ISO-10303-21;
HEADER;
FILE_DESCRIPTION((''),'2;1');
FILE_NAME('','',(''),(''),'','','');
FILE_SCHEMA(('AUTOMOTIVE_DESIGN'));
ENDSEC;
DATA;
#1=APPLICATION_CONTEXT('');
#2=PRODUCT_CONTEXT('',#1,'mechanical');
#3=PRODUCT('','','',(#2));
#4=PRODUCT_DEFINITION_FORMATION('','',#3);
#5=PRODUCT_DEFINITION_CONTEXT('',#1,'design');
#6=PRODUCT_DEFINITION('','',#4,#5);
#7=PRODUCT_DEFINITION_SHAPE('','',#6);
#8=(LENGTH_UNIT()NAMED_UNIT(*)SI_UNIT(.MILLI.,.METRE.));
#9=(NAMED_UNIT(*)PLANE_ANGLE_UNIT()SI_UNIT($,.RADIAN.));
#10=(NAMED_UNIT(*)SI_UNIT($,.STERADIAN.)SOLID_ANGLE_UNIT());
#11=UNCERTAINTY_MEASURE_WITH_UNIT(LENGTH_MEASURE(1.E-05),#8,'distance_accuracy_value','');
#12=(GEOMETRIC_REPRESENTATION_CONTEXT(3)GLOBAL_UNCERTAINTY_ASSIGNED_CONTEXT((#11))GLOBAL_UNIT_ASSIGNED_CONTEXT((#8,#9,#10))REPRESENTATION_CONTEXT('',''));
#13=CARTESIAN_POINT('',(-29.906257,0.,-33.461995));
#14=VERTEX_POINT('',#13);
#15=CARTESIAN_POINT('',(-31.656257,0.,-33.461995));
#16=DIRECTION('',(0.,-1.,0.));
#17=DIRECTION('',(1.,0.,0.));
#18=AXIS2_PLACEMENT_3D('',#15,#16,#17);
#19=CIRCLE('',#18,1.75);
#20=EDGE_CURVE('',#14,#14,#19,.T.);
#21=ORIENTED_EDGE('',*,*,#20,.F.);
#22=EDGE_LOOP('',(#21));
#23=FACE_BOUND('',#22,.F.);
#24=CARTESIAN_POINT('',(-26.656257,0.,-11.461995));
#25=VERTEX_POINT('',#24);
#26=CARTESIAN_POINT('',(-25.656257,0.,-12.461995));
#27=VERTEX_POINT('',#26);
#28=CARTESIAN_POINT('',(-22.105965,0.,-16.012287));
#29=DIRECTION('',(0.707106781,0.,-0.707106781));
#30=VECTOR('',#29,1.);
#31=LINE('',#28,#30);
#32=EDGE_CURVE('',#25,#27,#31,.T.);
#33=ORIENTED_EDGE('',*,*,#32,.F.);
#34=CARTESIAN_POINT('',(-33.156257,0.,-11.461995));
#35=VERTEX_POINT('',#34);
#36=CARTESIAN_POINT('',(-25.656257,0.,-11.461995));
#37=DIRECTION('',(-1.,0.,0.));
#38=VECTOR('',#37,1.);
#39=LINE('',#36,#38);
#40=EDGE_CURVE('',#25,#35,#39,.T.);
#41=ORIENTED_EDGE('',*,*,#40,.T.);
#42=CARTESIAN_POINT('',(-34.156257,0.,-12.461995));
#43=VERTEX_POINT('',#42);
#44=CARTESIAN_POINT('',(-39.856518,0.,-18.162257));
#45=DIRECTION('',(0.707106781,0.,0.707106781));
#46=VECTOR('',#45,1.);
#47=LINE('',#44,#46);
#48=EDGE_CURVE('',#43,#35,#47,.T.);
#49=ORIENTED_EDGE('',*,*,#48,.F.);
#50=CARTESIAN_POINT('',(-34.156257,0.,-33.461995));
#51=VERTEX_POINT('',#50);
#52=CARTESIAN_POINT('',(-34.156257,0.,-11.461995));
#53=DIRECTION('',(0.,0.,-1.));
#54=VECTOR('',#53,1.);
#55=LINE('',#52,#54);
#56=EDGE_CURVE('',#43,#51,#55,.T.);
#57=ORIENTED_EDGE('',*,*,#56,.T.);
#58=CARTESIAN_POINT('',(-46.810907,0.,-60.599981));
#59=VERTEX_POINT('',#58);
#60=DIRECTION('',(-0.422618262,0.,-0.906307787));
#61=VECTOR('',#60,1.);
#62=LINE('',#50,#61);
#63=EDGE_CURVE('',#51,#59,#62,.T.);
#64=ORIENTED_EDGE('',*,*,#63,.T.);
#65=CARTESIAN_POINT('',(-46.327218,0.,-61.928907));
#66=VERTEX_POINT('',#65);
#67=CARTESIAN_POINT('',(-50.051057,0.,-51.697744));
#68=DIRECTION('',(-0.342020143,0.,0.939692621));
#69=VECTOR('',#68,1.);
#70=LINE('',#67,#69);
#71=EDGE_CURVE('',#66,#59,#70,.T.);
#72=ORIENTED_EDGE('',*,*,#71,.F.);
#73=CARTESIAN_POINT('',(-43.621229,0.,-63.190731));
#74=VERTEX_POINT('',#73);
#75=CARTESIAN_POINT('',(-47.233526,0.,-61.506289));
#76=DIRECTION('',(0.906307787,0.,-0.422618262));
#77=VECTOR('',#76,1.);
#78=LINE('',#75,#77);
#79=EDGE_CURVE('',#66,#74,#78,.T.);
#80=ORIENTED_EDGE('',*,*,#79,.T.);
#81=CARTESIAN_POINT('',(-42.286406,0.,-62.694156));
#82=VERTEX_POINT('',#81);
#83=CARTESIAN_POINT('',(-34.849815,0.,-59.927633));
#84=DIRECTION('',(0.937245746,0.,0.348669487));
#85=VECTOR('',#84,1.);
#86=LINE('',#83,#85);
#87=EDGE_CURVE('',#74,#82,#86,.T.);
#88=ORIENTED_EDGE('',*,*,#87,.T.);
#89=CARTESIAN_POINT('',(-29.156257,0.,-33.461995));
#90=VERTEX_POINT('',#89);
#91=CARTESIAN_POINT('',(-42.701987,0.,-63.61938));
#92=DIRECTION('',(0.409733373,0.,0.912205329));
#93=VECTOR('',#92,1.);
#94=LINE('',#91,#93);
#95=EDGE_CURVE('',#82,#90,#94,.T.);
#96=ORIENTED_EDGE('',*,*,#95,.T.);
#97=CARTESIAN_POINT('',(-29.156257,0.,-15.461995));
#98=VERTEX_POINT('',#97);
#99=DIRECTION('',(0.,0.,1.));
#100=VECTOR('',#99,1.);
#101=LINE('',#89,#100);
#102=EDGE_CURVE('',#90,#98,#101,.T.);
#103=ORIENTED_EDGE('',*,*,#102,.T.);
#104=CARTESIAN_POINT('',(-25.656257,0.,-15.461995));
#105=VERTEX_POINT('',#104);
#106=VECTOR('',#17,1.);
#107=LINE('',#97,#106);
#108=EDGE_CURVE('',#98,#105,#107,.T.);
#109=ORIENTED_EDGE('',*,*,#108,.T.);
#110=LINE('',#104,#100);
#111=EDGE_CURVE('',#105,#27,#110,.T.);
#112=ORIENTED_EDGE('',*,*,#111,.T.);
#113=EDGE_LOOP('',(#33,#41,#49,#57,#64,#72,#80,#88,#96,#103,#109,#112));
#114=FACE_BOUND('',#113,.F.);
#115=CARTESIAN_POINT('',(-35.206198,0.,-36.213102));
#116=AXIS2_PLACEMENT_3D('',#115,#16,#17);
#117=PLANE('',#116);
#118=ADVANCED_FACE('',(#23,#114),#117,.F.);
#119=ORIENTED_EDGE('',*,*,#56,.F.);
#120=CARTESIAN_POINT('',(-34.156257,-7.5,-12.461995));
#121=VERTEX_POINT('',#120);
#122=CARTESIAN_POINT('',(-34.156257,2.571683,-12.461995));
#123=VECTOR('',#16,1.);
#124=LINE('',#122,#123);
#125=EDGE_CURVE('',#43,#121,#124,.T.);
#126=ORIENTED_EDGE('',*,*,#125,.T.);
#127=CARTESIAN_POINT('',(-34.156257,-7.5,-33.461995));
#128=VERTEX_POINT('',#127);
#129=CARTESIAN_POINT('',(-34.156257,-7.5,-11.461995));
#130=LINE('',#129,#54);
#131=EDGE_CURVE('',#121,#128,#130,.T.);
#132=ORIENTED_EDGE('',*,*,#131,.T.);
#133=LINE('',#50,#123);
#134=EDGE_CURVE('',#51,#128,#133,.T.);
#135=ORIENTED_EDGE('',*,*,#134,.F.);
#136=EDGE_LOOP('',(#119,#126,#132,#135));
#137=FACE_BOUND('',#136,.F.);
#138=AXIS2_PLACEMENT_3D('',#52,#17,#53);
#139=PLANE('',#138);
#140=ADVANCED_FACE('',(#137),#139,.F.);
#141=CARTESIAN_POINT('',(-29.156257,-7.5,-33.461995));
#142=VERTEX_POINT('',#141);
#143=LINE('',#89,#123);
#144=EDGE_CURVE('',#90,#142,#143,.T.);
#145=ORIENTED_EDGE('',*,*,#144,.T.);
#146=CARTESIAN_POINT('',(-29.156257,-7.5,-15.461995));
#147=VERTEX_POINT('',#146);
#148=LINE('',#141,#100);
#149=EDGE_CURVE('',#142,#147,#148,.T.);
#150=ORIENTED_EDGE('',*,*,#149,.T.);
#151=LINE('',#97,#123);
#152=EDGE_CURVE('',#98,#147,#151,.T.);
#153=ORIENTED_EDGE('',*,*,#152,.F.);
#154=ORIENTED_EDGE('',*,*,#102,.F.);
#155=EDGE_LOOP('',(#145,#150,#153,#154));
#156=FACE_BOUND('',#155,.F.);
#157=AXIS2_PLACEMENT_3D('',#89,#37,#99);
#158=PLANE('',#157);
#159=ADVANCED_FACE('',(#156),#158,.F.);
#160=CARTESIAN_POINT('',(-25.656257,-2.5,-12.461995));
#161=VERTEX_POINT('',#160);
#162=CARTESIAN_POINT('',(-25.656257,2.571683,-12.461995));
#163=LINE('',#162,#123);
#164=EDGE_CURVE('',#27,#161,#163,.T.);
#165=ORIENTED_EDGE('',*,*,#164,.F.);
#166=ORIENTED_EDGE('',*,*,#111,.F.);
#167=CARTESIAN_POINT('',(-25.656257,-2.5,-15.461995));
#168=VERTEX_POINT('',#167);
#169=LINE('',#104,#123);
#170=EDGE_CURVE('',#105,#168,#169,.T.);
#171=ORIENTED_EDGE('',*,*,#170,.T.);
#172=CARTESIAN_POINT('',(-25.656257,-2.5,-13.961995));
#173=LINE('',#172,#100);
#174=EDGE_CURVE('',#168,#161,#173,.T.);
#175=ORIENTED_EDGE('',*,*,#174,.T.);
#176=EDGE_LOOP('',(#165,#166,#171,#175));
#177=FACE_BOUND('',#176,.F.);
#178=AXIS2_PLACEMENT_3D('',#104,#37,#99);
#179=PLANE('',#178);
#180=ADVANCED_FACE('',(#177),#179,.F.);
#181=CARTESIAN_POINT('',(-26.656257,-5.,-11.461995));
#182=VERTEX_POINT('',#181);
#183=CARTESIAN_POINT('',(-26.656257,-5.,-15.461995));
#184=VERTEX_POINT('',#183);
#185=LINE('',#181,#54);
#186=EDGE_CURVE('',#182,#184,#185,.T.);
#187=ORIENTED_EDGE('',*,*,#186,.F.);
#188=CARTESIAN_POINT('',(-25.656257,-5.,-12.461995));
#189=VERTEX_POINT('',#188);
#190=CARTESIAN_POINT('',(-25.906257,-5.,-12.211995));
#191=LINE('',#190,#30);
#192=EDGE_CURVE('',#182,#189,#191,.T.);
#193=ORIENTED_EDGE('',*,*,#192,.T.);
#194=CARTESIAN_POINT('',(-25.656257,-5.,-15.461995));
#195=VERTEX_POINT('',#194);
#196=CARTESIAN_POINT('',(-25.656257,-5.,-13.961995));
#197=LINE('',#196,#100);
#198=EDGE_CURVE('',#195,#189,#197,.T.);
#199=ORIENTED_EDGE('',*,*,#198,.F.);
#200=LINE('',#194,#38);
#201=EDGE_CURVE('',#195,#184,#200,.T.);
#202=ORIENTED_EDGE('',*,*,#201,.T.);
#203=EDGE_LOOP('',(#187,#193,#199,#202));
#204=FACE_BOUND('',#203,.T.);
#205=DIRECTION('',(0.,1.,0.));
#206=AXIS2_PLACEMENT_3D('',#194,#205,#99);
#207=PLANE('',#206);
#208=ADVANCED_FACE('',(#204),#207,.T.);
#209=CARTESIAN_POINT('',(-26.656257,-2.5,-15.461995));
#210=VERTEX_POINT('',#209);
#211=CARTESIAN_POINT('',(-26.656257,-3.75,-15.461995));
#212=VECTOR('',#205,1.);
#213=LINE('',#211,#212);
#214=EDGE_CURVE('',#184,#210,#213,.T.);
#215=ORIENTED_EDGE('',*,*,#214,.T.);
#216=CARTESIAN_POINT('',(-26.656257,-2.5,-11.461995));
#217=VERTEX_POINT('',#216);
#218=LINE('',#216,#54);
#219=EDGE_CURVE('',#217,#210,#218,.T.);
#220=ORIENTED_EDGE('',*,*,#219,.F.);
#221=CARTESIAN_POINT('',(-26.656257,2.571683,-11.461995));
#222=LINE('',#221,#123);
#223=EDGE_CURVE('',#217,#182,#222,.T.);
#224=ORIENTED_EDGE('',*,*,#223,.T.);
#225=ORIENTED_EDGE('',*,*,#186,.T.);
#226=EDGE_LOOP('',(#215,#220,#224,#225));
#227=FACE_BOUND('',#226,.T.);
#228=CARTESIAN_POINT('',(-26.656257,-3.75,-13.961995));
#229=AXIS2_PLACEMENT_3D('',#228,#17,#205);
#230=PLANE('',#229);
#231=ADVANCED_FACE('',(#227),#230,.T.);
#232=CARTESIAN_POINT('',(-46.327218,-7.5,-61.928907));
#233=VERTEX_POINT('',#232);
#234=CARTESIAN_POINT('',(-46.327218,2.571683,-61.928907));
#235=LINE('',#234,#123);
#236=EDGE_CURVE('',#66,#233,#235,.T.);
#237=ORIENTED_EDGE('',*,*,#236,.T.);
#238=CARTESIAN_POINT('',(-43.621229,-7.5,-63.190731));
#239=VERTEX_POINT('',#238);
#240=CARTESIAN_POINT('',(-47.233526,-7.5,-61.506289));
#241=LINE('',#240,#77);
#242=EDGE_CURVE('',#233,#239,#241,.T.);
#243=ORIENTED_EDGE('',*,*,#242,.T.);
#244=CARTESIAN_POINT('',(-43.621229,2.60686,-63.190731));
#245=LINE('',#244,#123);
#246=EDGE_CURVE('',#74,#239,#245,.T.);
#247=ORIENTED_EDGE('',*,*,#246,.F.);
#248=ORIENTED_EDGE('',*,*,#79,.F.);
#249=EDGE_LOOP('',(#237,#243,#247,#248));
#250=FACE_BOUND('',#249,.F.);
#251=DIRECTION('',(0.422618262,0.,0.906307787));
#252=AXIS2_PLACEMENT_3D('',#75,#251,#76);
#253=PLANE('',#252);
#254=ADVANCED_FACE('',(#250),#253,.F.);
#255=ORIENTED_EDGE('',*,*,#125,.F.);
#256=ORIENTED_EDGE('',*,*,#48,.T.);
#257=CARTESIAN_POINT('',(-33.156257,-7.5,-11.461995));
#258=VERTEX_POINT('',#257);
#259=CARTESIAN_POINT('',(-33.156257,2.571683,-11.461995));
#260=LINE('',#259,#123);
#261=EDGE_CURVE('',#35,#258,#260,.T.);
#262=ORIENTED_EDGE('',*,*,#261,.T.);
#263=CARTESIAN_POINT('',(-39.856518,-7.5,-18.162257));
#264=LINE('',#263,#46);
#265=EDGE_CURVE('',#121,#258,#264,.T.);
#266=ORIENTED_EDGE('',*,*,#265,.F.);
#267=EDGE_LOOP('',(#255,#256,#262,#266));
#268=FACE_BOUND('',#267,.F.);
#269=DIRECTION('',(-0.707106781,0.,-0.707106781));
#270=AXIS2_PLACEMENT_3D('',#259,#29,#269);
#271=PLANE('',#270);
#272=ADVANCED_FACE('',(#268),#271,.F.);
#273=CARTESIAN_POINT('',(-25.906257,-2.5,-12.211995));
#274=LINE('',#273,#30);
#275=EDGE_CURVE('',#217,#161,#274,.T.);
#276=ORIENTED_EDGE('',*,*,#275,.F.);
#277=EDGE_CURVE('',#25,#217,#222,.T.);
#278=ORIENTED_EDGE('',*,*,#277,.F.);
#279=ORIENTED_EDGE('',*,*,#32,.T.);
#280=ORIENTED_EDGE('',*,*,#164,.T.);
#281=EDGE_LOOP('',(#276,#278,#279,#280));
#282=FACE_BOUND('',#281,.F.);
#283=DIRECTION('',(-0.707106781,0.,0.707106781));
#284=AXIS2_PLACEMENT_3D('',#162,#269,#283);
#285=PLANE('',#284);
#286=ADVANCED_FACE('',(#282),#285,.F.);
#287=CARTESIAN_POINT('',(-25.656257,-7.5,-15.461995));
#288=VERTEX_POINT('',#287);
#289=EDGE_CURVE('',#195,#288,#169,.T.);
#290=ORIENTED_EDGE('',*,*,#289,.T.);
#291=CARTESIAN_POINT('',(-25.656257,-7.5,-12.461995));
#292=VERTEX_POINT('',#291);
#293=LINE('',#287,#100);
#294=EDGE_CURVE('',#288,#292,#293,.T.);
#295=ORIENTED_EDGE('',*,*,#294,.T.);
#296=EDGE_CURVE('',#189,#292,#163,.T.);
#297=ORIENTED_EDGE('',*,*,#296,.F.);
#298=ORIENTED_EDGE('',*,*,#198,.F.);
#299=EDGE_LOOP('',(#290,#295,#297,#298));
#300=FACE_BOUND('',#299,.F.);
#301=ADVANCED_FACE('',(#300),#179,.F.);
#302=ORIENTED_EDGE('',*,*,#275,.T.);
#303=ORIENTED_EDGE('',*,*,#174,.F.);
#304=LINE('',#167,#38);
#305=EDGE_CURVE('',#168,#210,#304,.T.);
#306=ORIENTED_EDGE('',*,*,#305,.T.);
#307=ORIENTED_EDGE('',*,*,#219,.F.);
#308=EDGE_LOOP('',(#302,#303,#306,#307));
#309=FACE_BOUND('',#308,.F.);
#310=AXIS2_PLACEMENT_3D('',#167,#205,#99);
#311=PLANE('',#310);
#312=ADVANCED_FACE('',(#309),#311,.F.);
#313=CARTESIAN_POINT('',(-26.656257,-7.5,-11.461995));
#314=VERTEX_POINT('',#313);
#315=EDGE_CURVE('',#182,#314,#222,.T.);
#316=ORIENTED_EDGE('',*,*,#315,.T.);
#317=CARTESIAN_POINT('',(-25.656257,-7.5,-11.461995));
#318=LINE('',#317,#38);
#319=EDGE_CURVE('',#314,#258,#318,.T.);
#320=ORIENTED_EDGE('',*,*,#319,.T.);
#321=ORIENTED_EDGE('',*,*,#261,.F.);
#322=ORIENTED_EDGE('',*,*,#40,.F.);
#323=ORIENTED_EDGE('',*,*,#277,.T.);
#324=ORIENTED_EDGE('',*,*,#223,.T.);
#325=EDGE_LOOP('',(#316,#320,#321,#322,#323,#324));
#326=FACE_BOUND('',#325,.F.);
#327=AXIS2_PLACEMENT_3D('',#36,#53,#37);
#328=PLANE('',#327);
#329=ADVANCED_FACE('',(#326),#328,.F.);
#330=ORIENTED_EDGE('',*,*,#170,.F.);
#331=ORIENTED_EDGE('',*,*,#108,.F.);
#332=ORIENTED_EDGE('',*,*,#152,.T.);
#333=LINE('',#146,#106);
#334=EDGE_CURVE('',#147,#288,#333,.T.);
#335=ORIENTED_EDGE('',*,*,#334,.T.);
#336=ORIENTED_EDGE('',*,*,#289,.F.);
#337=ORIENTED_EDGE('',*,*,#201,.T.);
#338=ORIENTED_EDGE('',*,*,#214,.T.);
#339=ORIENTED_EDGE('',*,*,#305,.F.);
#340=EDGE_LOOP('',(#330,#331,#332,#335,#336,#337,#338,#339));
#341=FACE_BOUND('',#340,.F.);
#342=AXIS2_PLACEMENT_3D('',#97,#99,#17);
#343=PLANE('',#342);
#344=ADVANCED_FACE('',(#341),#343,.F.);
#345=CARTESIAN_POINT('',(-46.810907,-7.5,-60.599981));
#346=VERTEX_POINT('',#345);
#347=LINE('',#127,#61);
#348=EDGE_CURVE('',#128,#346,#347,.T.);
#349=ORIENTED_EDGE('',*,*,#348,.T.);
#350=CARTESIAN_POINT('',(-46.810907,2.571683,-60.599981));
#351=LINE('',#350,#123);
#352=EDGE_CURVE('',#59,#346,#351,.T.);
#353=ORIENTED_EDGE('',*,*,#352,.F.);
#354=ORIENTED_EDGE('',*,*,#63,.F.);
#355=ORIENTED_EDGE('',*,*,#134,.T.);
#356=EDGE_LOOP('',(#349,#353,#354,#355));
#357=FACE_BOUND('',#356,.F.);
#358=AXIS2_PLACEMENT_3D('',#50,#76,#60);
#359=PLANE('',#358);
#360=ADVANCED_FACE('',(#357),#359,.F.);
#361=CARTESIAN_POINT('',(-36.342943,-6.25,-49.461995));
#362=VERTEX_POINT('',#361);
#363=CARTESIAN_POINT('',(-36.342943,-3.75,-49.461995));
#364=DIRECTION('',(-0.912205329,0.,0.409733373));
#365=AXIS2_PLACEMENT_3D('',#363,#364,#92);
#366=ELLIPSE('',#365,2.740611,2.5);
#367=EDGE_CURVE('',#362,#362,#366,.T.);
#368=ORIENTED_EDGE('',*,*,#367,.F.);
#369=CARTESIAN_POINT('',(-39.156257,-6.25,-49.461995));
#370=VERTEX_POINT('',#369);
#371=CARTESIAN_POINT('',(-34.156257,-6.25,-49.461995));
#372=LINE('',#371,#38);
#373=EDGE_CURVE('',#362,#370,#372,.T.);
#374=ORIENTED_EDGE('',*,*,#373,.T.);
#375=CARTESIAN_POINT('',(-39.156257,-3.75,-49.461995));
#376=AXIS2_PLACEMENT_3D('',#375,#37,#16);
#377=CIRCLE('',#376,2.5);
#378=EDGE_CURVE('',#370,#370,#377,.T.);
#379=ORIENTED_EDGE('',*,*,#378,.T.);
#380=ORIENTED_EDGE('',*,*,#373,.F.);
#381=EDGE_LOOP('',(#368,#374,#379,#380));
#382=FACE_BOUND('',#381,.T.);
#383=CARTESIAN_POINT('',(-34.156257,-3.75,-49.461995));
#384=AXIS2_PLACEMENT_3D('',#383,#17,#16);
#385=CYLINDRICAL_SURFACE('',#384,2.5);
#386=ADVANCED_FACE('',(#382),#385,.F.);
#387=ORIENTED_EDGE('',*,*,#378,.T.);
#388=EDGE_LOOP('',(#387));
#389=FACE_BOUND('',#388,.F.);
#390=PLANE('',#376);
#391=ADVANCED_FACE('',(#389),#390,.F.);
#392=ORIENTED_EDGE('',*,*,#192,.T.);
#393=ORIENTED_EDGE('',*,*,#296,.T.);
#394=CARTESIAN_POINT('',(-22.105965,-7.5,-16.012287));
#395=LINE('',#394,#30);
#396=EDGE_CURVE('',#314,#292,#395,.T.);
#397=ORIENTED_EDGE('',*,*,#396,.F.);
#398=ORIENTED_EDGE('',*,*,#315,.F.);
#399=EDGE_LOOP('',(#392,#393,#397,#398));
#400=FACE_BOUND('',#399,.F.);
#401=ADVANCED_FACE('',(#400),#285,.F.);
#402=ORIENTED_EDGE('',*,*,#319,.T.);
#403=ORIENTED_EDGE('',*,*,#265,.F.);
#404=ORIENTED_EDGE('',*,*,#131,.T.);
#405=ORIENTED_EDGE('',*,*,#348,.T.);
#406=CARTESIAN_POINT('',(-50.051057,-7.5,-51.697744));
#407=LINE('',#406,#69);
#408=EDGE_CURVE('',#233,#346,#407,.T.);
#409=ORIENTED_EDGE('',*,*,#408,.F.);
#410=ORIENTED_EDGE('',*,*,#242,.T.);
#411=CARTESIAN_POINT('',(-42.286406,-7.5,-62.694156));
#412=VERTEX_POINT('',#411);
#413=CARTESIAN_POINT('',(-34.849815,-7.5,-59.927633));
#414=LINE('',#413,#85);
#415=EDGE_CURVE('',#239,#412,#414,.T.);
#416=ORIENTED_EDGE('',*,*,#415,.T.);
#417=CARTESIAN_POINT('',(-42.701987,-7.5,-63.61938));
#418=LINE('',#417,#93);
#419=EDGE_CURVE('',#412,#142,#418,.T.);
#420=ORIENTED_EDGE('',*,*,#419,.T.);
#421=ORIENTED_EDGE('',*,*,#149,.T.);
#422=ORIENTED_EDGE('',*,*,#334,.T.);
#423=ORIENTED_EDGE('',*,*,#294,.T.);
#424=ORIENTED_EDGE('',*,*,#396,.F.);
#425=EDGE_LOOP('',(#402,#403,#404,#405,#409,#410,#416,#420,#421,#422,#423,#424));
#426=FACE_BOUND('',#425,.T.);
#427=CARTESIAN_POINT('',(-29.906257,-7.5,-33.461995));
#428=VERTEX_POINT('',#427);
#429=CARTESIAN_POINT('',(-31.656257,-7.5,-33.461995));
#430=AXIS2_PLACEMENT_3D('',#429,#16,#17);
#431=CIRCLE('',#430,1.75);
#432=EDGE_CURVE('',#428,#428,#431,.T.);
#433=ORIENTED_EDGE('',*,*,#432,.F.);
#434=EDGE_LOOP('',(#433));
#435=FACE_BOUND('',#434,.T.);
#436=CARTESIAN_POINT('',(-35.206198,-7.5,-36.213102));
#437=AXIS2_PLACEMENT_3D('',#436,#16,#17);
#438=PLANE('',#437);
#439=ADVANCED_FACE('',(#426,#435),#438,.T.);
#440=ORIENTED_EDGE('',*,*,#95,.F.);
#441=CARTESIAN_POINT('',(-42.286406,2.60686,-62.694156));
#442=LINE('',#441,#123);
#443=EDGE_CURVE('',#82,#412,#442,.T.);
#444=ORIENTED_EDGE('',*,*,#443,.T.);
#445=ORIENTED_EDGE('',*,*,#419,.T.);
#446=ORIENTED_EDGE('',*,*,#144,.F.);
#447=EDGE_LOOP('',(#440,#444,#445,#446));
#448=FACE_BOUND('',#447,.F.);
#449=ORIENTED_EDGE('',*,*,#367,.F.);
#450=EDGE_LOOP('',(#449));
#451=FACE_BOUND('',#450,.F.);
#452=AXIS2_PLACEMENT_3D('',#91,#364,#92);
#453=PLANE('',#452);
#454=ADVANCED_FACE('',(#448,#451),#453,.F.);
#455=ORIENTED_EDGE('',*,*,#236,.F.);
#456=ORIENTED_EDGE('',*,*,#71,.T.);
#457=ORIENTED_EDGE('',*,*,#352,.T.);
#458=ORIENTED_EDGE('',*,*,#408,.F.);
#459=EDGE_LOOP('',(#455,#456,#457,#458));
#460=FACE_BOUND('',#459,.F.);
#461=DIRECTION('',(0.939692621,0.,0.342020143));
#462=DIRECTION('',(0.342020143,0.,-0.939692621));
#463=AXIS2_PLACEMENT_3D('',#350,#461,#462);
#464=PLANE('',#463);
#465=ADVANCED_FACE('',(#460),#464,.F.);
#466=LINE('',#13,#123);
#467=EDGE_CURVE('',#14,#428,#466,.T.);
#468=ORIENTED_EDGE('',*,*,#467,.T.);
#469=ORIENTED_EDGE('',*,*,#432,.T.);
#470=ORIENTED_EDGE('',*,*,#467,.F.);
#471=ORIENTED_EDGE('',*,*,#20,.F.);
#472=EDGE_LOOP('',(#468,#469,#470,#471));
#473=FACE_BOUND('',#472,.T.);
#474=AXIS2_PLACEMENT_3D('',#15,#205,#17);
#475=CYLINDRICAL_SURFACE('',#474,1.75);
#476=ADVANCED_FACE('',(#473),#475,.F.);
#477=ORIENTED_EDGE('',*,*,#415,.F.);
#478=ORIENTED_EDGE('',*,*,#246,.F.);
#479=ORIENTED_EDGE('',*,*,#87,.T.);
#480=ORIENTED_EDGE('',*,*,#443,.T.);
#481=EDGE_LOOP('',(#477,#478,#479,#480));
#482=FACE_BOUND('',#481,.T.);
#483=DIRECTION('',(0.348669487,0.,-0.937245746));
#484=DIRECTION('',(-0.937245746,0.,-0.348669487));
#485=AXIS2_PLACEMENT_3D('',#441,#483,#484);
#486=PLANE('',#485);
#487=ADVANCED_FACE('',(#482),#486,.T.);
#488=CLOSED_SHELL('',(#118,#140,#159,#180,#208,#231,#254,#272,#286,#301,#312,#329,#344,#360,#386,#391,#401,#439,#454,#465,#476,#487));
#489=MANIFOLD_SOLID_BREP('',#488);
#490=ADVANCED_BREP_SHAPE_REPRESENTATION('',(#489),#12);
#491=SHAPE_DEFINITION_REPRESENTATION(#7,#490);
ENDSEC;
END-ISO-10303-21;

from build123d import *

# Parameters (mm, degrees)
F0_R        = 1.75
F1_DEPTH    = 7.5
F2_T1_DEPTH = 12.6433659759
F2_T3_DEPTH = 12.7137209508
F3_R        = 2.5
F4_DEPTH    = 5
F5_W        = 2.5
F5_H        = 3
F6_DEPTH    = 1
F7_W        = 1
F7_H        = 2.5
F8_DEPTH    = 25


# Not quite as in the source:
# - a fillet or chamfer that OpenCascade refuses, or shapes differently, is made with other operations: its cross-section is extruded or revolved along the edge and cut away or added


with BuildPart() as f1:
    # F0 (on Front) → F1 (new body)
    with BuildSketch(Plane.XZ):
        Polygon((-29.1562567131, -15.4619954874), (-25.6562567131, -15.4619954874), (-25.6562567131, -11.4619954874), (-34.1562567131, -11.4619954874), (-34.1562567131, -33.4619954874), (-47.2335256009, -61.5062891187), (-42.7019866657, -63.6193804274), (-29.1562567131, -33.4619954874), align=None)
        with Locations((-31.6562567131, -33.4619954874)):
            Circle(F0_R, mode=Mode.SUBTRACT)
    extrude(amount=F1_DEPTH)

    # F2: chamfer of 1 on 4 edges, made by hand

    # F2_s2 → F2_t1 (cut)
    with BuildSketch(Plane.XZ.offset(-2.571682988)):
        Polygon((-33.1562567131, -11.4619954874), (-34.1562567131, -12.4619954874), (-34.1562567131, -11.4619954874), align=None)
        Polygon((-25.6562567131, -12.4619954874), (-26.6562567131, -11.4619954874), (-25.6562567131, -11.4619954874), align=None)
        Polygon((-46.8109073392, -60.5999813317), (-46.3272178139, -61.9289073804), (-47.2335256009, -61.5062891187), align=None)
    extrude(amount=F2_T1_DEPTH, mode=Mode.SUBTRACT)

    # F2_s4 → F2_t3 (cut)
    with BuildSketch(Plane.XZ.offset(-2.6068604754)):
        Polygon((-42.2864056117, -62.6941561786), (-43.6212292029, -63.1907305926), (-42.7019866657, -63.6193804274), align=None)
    extrude(amount=F2_T3_DEPTH, mode=Mode.SUBTRACT)

    # F3 (on face) → F4 (cut)
    with BuildSketch(Plane(origin=(-34.1562567131, 0, 0), x_dir=(0, -1, 0), z_dir=(-1, 0, 0))):
        with Locations((3.75, -49.4619954874)):
            Circle(F3_R)
    extrude(amount=F4_DEPTH, mode=Mode.SUBTRACT)

    # F5 (on face) → F6 (cut)
    with BuildSketch(Plane.YZ.offset(-25.6562567131)):
        with Locations((-3.75, -13.9619954874)):
            Rectangle(F5_W, F5_H)
    extrude(amount=-F6_DEPTH, mode=Mode.SUBTRACT)

    # F7 (on face) → F8 (cut)
    with BuildSketch(Plane(origin=(0, 0, -12.4619954874), x_dir=(1, 0, 0), z_dir=(0, 0, -1))):
        with Locations((-26.1562567131, 3.75)):
            Rectangle(F7_W, F7_H)
    extrude(amount=-F8_DEPTH, mode=Mode.SUBTRACT)


solid = f1.part
